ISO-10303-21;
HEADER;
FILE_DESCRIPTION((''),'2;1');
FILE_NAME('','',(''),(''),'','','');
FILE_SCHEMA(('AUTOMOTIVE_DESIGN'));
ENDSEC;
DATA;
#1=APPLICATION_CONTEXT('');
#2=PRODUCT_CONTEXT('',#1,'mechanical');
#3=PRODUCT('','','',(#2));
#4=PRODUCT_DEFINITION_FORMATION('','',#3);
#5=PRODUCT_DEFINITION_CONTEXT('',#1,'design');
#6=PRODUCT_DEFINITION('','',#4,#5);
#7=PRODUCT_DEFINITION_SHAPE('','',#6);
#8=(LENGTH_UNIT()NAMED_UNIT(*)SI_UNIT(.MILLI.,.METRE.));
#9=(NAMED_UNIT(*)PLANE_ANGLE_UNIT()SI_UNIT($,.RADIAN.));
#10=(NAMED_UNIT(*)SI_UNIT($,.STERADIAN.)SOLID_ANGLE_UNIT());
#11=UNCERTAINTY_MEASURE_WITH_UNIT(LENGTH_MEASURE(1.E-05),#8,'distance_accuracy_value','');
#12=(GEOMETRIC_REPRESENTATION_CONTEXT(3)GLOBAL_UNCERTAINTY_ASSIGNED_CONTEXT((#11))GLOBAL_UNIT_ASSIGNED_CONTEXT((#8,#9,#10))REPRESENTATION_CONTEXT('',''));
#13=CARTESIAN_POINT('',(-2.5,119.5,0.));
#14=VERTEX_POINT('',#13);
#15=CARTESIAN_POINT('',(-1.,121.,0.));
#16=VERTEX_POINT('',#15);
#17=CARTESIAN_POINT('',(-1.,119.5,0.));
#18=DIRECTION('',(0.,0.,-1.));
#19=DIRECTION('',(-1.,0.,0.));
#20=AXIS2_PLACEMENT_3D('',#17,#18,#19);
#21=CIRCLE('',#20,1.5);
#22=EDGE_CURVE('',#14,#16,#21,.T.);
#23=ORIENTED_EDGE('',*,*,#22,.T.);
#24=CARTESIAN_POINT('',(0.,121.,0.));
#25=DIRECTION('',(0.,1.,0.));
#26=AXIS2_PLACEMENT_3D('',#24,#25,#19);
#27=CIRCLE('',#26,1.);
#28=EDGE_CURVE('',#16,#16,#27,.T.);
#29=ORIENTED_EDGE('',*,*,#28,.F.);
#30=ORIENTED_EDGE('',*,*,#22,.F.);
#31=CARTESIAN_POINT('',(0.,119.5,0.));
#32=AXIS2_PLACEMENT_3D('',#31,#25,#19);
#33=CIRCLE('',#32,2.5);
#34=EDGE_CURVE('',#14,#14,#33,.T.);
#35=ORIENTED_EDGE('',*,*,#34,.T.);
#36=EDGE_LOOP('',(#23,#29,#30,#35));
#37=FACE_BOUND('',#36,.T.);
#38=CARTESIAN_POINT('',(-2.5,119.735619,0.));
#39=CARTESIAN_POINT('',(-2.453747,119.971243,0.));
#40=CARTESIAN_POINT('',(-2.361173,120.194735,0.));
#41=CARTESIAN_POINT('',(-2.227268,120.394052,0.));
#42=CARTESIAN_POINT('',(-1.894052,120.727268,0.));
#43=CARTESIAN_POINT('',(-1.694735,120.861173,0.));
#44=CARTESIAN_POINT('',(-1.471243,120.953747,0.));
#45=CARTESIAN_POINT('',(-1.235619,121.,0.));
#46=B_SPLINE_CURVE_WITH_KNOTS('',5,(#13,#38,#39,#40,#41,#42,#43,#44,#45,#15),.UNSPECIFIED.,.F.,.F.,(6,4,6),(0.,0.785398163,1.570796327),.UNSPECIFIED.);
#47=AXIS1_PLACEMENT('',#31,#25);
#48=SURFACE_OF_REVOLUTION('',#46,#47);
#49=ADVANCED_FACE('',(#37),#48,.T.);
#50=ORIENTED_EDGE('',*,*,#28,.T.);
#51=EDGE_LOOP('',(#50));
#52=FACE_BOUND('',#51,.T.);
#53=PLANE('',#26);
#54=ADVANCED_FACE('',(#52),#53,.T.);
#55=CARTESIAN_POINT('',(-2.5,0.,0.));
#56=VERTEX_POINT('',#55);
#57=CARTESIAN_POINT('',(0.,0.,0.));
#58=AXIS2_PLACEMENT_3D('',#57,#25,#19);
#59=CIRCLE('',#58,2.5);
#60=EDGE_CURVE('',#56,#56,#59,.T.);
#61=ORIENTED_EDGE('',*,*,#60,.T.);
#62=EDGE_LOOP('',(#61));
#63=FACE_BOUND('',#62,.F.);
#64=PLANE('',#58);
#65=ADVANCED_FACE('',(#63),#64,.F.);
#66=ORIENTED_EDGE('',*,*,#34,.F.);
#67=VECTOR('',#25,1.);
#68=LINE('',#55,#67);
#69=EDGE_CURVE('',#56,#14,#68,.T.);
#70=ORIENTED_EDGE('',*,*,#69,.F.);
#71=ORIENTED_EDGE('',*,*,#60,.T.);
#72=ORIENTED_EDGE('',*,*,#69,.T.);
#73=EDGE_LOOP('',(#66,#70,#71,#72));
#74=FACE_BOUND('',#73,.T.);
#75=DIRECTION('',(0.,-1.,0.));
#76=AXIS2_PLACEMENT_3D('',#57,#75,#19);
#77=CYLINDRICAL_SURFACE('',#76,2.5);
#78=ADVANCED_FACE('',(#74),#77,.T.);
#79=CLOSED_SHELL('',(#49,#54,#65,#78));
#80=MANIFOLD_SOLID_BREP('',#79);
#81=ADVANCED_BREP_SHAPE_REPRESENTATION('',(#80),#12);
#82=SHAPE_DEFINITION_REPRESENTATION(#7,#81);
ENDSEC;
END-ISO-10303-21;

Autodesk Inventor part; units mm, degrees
ref_plane "YZ Plane" through (0, 0, 0) normal (1, 0, 0) x (0, 1, 0)
ref_plane "XZ Plane" through (0, 0, 0) normal (0, 1, 0) x (-1, 0, 0)
ref_plane "XY Plane" through (0, 0, 0) normal (0, 0, 1) x (1, 0, 0)
sketch "Sketch1" plane through (0, 0, 0) normal (0, 1, 0) x (-1, 0, 0)
  circle A0 centre (0, 0) radius 2.5
  dimension "d0" = 5
extrude "Extrusion1" add sketch "Sketch1" along normal blind 121
fillet "Fillet1" radius 1.5 1 edges at (2.5, 121, 0)
thread "Thread1" size "M5x0.8" class "6g" standard "ISO Metric profile" length 12
properties part number "2062"
